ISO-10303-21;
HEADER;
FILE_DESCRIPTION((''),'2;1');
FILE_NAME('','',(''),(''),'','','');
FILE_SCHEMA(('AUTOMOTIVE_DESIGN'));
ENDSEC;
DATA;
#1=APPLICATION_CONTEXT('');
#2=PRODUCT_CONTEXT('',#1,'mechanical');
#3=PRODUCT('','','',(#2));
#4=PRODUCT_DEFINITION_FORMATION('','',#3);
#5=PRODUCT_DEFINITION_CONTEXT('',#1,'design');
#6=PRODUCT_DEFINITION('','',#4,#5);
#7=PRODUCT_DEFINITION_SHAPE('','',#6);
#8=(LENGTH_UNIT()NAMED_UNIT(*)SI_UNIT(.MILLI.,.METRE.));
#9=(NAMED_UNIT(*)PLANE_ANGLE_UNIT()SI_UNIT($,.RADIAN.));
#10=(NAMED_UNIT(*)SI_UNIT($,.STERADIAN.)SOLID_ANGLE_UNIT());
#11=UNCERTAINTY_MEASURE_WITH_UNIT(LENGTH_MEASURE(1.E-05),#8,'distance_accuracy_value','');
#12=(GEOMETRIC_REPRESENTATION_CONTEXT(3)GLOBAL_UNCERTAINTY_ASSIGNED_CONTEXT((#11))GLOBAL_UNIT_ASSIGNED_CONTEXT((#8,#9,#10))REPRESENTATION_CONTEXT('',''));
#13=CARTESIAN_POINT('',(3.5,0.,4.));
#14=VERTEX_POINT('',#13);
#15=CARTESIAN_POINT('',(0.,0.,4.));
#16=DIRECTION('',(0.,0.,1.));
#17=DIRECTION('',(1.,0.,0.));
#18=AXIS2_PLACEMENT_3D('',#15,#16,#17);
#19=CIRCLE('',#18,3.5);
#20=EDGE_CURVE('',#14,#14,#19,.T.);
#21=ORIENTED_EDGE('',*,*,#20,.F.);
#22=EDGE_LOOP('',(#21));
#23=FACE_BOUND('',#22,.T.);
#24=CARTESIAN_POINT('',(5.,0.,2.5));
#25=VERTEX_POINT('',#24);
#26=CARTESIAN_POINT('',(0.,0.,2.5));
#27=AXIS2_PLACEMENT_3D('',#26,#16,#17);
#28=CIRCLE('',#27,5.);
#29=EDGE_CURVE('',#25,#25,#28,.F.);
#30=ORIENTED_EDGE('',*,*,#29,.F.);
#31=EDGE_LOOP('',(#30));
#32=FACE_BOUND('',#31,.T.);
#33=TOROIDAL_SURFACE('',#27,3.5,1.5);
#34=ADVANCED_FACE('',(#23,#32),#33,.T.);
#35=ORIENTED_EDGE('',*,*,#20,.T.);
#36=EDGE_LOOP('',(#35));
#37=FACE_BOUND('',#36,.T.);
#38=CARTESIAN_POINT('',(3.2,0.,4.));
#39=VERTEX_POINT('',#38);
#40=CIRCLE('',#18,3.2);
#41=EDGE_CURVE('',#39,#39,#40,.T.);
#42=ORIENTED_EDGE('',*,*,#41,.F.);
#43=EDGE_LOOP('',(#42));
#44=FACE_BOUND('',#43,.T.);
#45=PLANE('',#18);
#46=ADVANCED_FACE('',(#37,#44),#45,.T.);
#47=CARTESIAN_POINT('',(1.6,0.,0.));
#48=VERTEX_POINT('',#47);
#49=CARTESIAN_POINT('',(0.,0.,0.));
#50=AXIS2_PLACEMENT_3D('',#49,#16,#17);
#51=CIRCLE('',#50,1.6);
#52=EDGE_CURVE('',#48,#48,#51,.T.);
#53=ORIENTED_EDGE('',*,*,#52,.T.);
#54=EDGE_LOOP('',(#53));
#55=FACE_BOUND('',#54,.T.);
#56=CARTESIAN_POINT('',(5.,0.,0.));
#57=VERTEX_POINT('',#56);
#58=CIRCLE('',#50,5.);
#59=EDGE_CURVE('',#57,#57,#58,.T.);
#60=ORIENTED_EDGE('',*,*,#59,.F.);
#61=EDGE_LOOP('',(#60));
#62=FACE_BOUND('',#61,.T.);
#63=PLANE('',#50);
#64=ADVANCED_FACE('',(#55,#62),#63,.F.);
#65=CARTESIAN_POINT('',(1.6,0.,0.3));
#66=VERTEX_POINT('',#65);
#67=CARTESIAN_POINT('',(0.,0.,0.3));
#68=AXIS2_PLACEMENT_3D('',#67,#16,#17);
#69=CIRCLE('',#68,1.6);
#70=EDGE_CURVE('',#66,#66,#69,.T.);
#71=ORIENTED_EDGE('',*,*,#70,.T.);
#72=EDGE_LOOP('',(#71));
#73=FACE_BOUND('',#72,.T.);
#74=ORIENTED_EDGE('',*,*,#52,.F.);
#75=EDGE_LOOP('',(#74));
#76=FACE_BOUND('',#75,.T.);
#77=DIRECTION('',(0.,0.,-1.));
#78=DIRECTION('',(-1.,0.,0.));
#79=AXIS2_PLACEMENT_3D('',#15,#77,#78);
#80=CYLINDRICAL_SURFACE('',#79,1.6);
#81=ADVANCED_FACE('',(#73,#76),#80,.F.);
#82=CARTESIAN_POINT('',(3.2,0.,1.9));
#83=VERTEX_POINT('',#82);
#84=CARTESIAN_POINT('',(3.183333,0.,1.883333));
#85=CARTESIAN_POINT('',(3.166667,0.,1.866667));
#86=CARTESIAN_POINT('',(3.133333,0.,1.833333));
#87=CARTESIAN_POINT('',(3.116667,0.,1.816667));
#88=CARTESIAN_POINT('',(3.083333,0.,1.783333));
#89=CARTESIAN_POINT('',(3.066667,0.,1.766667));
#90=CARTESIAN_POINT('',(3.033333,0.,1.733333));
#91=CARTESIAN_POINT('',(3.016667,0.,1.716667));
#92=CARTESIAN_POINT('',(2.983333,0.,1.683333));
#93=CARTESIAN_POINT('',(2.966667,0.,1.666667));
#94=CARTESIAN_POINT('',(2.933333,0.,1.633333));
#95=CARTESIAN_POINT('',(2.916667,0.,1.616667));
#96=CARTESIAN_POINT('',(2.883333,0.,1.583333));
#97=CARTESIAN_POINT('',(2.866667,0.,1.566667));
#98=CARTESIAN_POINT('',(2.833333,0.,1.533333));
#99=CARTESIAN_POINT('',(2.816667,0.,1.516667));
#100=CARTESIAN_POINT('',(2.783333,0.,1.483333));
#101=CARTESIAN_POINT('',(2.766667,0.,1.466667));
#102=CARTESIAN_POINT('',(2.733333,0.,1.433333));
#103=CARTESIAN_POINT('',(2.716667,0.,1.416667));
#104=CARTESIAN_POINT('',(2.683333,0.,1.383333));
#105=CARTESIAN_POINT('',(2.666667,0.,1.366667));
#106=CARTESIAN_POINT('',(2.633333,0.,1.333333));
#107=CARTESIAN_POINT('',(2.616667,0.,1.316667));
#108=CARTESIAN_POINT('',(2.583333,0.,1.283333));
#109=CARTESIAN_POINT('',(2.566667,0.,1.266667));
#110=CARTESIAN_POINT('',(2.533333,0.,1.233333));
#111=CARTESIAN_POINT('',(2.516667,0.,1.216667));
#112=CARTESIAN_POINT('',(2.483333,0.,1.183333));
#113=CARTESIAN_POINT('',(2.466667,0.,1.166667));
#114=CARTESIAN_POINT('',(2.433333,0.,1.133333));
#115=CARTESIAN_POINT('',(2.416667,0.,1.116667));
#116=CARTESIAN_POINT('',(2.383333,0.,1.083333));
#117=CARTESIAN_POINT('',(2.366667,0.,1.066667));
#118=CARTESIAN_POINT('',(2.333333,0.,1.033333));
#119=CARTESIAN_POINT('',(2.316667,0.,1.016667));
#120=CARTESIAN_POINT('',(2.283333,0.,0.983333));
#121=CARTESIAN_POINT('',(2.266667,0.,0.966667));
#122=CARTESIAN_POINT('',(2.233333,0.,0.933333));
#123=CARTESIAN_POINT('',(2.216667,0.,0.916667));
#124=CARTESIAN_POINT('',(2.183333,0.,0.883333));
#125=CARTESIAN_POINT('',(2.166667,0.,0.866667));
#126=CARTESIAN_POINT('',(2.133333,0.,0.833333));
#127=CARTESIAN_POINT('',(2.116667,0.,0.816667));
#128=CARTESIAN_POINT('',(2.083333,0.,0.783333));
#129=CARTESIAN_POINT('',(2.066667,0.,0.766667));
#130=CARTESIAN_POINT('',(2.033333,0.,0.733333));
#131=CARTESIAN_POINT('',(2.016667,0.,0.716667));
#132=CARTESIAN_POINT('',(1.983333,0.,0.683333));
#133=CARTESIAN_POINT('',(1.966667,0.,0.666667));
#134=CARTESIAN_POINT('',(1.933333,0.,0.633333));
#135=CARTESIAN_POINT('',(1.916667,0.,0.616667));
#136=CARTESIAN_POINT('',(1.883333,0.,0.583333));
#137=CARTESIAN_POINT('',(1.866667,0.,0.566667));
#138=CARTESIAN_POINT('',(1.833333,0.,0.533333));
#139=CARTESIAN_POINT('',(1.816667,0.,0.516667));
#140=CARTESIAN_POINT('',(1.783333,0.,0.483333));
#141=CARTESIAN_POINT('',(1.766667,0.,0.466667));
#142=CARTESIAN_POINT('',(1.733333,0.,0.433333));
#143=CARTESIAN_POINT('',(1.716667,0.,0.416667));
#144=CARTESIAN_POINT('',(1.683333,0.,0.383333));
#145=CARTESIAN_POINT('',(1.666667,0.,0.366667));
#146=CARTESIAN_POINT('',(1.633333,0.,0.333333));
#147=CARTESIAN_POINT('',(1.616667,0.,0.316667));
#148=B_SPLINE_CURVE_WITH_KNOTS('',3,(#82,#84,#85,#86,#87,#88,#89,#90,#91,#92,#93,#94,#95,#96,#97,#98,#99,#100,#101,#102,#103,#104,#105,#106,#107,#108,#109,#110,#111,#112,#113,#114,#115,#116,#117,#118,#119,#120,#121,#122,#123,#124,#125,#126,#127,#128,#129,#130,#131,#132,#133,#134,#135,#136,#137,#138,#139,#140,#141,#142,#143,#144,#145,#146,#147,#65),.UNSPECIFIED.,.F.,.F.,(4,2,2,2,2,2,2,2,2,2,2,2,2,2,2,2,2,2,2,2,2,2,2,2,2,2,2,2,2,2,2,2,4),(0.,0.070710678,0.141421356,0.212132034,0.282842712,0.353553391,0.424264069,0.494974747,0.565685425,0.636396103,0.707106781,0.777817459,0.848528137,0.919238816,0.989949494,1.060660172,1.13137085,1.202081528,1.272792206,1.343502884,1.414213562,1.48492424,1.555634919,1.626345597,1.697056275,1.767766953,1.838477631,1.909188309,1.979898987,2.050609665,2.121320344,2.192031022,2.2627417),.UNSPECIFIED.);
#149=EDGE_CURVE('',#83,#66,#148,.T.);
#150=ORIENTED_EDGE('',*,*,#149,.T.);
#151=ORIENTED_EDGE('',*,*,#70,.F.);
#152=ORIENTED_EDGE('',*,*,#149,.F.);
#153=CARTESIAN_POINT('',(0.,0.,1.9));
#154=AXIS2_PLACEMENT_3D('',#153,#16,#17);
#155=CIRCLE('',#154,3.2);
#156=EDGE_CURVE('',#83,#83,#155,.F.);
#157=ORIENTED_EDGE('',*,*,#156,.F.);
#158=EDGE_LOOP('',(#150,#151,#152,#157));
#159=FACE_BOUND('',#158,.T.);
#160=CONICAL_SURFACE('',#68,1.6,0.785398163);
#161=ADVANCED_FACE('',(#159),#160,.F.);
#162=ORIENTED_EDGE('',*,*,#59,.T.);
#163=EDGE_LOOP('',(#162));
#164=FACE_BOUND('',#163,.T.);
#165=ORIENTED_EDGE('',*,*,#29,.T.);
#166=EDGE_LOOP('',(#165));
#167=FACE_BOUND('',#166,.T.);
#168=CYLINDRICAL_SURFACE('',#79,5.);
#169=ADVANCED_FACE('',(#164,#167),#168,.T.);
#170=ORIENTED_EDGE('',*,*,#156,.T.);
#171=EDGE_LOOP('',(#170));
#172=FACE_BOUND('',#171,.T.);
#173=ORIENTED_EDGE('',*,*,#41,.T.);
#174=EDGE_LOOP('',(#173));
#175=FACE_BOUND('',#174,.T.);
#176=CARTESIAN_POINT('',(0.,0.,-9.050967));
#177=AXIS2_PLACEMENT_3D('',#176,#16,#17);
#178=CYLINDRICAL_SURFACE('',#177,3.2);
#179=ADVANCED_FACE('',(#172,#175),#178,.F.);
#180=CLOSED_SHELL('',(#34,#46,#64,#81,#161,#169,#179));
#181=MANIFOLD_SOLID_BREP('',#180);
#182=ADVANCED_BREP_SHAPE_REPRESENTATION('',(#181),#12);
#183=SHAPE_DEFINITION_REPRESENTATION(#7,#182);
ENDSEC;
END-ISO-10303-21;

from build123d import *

# Parameters (mm, degrees)
SKETCH1_R           = 5
SKETCH1_R_2         = 1.6
BOSS_EXTRUDE1_DEPTH = 4
SKETCH2_R           = 3.2
CUT_EXTRUDE1_DEPTH  = 1.9
CHAMFER1_SIZE       = 1.8
FILLET1_R           = 1.5


with BuildPart() as part:
    # Sketch1 → Boss-Extrude1 (new body)
    with BuildSketch(Plane.XY):
        Circle(SKETCH1_R)
        Circle(SKETCH1_R_2, mode=Mode.SUBTRACT)
    extrude(amount=BOSS_EXTRUDE1_DEPTH)

    # Sketch2 → Cut-Extrude1 (cut)
    with BuildSketch(Plane.XY.offset(4)):
        Circle(SKETCH2_R)
    extrude(amount=-CUT_EXTRUDE1_DEPTH, mode=Mode.SUBTRACT)

    # Chamfer1
    # the kernel refuses this chamfer: 1.8 mm, written as the material it takes off along each edge
    with BuildSketch(Plane(origin=(0, 0, 2.1), x_dir=(1, 0, 0), z_dir=(0, 1, 0))) as chamfer1_piece_1_section:
        Polygon((1.6, CHAMFER1_SIZE), (1.6 + CHAMFER1_SIZE, 0), (1.6, 0), align=None)
    chamfer1_piece_1 = revolve(axis=Axis((0, 0, 2.1), (0, 0, -1)), mode=Mode.PRIVATE)
    chamfer1_piece_1 = chamfer1_piece_1 & Plane(origin=(0, 0, 1.094879123), x_dir=(1, 0, 0), z_dir=(0, 0, 1)) * Cylinder(3.2, 14, mode=Mode.PRIVATE)
    add(chamfer1_piece_1, mode=Mode.SUBTRACT)

    # Fillet1
    fillet1_edges = [part.edges().sort_by_distance(p)[0] for p in [
        (-5, 0, 4),
    ]]
    fillet(fillet1_edges, radius=FILLET1_R)


solid = part.part
